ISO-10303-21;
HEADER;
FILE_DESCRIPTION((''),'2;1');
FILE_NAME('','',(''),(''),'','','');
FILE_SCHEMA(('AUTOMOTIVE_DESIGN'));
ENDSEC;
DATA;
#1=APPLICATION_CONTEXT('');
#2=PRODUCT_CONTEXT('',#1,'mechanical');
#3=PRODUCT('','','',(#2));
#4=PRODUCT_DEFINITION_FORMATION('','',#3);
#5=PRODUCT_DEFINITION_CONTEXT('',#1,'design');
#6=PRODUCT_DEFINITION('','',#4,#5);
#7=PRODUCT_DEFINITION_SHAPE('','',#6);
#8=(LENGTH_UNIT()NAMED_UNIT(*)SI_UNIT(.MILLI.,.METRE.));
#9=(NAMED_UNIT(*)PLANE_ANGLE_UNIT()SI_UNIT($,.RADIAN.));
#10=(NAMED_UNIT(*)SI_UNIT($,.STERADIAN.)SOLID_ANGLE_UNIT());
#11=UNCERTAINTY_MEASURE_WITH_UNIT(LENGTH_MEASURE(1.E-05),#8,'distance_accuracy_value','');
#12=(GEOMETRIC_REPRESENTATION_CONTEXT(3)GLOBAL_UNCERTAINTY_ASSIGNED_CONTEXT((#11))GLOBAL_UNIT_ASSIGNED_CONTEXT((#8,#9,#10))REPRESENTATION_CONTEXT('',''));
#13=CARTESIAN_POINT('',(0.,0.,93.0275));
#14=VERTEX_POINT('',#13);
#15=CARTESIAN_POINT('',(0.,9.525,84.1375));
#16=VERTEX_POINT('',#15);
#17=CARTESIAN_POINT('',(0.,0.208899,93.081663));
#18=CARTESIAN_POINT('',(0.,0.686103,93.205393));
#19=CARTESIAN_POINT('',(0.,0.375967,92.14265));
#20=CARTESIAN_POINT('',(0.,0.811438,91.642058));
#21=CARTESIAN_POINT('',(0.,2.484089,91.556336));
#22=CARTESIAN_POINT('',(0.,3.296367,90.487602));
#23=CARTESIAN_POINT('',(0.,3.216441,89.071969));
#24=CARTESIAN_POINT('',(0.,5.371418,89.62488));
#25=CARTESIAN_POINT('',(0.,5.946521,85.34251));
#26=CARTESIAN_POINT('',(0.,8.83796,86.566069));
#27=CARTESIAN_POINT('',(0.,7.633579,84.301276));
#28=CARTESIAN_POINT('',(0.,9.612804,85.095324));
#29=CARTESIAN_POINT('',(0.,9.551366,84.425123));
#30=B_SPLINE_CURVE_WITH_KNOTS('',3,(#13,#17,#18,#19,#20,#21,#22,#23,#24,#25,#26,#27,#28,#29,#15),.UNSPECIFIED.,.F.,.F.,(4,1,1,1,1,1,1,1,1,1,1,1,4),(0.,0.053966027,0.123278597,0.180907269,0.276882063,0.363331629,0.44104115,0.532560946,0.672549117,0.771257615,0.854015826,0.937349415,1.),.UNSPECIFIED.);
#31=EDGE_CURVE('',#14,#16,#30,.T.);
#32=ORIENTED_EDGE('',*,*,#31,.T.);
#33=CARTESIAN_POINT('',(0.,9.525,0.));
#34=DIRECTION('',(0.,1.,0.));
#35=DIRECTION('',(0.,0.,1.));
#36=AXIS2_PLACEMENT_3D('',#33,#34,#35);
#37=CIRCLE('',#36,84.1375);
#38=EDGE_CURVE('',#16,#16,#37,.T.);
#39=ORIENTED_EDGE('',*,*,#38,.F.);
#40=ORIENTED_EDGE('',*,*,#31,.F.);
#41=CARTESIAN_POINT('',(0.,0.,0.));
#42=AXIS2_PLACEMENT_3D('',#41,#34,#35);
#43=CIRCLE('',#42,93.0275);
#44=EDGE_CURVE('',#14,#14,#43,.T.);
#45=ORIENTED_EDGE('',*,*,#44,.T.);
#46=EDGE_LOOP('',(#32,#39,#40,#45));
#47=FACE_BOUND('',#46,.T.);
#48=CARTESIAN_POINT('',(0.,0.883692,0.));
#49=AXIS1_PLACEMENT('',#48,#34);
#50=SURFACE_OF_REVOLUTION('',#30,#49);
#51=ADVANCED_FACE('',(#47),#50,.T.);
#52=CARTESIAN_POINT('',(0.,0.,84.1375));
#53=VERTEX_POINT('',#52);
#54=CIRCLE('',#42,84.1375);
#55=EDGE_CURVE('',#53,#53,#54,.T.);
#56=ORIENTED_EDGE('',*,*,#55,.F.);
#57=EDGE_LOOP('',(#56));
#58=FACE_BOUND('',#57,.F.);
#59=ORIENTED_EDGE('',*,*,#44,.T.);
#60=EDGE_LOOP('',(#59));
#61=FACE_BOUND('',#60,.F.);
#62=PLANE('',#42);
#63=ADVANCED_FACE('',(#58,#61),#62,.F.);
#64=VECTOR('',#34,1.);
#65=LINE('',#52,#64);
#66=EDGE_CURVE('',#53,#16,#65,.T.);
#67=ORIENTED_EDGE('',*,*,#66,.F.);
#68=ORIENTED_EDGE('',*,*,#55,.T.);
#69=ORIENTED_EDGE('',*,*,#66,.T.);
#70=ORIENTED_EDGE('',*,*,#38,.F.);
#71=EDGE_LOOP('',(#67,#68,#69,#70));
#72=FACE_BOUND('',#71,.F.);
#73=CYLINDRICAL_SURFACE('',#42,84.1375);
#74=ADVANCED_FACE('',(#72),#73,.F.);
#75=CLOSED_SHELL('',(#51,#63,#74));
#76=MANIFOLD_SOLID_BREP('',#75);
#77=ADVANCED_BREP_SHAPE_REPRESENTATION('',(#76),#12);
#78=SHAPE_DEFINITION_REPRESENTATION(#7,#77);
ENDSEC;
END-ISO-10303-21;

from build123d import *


with BuildPart() as f1:
    # F0 (on Right) → F1 (revolve)
    with BuildSketch(Plane.YZ):
        with BuildLine():
            Line((0, 93.0275), (0, 84.1375))
            Line((0, 84.1375), (9.525, 84.1375))
            add(Edge.make_bspline(
                [(0, 93.0275), (0.2088990535, 93.081663291), (0.6861026497, 93.2053925124), (0.3759666943, 92.1426495892), (0.8114380473, 91.6420579009), (2.484088711, 91.5563355103), (3.2963665543, 90.4876015981), (3.216440736, 89.0719694166), (5.3714175986, 89.6248800904), (5.9465206782, 85.3425098548), (8.83795984, 86.566069281), (7.6335785616, 84.3012759174), (9.6128037423, 85.0953242376), (9.5513664398, 84.4251234478), (9.525, 84.1375)],
                knots=[0, 0, 0, 0, 0.0539660272, 0.1232785972, 0.1809072688, 0.2768820626, 0.3633316286, 0.4410411497, 0.5325609458, 0.6725491168, 0.7712576154, 0.8540158261, 0.9373494152, 1, 1, 1, 1], degree=3))
        make_face()
    revolve(axis=Axis((0, 0.8836919442, 0), (0, 1, 0)))


solid = f1.part
